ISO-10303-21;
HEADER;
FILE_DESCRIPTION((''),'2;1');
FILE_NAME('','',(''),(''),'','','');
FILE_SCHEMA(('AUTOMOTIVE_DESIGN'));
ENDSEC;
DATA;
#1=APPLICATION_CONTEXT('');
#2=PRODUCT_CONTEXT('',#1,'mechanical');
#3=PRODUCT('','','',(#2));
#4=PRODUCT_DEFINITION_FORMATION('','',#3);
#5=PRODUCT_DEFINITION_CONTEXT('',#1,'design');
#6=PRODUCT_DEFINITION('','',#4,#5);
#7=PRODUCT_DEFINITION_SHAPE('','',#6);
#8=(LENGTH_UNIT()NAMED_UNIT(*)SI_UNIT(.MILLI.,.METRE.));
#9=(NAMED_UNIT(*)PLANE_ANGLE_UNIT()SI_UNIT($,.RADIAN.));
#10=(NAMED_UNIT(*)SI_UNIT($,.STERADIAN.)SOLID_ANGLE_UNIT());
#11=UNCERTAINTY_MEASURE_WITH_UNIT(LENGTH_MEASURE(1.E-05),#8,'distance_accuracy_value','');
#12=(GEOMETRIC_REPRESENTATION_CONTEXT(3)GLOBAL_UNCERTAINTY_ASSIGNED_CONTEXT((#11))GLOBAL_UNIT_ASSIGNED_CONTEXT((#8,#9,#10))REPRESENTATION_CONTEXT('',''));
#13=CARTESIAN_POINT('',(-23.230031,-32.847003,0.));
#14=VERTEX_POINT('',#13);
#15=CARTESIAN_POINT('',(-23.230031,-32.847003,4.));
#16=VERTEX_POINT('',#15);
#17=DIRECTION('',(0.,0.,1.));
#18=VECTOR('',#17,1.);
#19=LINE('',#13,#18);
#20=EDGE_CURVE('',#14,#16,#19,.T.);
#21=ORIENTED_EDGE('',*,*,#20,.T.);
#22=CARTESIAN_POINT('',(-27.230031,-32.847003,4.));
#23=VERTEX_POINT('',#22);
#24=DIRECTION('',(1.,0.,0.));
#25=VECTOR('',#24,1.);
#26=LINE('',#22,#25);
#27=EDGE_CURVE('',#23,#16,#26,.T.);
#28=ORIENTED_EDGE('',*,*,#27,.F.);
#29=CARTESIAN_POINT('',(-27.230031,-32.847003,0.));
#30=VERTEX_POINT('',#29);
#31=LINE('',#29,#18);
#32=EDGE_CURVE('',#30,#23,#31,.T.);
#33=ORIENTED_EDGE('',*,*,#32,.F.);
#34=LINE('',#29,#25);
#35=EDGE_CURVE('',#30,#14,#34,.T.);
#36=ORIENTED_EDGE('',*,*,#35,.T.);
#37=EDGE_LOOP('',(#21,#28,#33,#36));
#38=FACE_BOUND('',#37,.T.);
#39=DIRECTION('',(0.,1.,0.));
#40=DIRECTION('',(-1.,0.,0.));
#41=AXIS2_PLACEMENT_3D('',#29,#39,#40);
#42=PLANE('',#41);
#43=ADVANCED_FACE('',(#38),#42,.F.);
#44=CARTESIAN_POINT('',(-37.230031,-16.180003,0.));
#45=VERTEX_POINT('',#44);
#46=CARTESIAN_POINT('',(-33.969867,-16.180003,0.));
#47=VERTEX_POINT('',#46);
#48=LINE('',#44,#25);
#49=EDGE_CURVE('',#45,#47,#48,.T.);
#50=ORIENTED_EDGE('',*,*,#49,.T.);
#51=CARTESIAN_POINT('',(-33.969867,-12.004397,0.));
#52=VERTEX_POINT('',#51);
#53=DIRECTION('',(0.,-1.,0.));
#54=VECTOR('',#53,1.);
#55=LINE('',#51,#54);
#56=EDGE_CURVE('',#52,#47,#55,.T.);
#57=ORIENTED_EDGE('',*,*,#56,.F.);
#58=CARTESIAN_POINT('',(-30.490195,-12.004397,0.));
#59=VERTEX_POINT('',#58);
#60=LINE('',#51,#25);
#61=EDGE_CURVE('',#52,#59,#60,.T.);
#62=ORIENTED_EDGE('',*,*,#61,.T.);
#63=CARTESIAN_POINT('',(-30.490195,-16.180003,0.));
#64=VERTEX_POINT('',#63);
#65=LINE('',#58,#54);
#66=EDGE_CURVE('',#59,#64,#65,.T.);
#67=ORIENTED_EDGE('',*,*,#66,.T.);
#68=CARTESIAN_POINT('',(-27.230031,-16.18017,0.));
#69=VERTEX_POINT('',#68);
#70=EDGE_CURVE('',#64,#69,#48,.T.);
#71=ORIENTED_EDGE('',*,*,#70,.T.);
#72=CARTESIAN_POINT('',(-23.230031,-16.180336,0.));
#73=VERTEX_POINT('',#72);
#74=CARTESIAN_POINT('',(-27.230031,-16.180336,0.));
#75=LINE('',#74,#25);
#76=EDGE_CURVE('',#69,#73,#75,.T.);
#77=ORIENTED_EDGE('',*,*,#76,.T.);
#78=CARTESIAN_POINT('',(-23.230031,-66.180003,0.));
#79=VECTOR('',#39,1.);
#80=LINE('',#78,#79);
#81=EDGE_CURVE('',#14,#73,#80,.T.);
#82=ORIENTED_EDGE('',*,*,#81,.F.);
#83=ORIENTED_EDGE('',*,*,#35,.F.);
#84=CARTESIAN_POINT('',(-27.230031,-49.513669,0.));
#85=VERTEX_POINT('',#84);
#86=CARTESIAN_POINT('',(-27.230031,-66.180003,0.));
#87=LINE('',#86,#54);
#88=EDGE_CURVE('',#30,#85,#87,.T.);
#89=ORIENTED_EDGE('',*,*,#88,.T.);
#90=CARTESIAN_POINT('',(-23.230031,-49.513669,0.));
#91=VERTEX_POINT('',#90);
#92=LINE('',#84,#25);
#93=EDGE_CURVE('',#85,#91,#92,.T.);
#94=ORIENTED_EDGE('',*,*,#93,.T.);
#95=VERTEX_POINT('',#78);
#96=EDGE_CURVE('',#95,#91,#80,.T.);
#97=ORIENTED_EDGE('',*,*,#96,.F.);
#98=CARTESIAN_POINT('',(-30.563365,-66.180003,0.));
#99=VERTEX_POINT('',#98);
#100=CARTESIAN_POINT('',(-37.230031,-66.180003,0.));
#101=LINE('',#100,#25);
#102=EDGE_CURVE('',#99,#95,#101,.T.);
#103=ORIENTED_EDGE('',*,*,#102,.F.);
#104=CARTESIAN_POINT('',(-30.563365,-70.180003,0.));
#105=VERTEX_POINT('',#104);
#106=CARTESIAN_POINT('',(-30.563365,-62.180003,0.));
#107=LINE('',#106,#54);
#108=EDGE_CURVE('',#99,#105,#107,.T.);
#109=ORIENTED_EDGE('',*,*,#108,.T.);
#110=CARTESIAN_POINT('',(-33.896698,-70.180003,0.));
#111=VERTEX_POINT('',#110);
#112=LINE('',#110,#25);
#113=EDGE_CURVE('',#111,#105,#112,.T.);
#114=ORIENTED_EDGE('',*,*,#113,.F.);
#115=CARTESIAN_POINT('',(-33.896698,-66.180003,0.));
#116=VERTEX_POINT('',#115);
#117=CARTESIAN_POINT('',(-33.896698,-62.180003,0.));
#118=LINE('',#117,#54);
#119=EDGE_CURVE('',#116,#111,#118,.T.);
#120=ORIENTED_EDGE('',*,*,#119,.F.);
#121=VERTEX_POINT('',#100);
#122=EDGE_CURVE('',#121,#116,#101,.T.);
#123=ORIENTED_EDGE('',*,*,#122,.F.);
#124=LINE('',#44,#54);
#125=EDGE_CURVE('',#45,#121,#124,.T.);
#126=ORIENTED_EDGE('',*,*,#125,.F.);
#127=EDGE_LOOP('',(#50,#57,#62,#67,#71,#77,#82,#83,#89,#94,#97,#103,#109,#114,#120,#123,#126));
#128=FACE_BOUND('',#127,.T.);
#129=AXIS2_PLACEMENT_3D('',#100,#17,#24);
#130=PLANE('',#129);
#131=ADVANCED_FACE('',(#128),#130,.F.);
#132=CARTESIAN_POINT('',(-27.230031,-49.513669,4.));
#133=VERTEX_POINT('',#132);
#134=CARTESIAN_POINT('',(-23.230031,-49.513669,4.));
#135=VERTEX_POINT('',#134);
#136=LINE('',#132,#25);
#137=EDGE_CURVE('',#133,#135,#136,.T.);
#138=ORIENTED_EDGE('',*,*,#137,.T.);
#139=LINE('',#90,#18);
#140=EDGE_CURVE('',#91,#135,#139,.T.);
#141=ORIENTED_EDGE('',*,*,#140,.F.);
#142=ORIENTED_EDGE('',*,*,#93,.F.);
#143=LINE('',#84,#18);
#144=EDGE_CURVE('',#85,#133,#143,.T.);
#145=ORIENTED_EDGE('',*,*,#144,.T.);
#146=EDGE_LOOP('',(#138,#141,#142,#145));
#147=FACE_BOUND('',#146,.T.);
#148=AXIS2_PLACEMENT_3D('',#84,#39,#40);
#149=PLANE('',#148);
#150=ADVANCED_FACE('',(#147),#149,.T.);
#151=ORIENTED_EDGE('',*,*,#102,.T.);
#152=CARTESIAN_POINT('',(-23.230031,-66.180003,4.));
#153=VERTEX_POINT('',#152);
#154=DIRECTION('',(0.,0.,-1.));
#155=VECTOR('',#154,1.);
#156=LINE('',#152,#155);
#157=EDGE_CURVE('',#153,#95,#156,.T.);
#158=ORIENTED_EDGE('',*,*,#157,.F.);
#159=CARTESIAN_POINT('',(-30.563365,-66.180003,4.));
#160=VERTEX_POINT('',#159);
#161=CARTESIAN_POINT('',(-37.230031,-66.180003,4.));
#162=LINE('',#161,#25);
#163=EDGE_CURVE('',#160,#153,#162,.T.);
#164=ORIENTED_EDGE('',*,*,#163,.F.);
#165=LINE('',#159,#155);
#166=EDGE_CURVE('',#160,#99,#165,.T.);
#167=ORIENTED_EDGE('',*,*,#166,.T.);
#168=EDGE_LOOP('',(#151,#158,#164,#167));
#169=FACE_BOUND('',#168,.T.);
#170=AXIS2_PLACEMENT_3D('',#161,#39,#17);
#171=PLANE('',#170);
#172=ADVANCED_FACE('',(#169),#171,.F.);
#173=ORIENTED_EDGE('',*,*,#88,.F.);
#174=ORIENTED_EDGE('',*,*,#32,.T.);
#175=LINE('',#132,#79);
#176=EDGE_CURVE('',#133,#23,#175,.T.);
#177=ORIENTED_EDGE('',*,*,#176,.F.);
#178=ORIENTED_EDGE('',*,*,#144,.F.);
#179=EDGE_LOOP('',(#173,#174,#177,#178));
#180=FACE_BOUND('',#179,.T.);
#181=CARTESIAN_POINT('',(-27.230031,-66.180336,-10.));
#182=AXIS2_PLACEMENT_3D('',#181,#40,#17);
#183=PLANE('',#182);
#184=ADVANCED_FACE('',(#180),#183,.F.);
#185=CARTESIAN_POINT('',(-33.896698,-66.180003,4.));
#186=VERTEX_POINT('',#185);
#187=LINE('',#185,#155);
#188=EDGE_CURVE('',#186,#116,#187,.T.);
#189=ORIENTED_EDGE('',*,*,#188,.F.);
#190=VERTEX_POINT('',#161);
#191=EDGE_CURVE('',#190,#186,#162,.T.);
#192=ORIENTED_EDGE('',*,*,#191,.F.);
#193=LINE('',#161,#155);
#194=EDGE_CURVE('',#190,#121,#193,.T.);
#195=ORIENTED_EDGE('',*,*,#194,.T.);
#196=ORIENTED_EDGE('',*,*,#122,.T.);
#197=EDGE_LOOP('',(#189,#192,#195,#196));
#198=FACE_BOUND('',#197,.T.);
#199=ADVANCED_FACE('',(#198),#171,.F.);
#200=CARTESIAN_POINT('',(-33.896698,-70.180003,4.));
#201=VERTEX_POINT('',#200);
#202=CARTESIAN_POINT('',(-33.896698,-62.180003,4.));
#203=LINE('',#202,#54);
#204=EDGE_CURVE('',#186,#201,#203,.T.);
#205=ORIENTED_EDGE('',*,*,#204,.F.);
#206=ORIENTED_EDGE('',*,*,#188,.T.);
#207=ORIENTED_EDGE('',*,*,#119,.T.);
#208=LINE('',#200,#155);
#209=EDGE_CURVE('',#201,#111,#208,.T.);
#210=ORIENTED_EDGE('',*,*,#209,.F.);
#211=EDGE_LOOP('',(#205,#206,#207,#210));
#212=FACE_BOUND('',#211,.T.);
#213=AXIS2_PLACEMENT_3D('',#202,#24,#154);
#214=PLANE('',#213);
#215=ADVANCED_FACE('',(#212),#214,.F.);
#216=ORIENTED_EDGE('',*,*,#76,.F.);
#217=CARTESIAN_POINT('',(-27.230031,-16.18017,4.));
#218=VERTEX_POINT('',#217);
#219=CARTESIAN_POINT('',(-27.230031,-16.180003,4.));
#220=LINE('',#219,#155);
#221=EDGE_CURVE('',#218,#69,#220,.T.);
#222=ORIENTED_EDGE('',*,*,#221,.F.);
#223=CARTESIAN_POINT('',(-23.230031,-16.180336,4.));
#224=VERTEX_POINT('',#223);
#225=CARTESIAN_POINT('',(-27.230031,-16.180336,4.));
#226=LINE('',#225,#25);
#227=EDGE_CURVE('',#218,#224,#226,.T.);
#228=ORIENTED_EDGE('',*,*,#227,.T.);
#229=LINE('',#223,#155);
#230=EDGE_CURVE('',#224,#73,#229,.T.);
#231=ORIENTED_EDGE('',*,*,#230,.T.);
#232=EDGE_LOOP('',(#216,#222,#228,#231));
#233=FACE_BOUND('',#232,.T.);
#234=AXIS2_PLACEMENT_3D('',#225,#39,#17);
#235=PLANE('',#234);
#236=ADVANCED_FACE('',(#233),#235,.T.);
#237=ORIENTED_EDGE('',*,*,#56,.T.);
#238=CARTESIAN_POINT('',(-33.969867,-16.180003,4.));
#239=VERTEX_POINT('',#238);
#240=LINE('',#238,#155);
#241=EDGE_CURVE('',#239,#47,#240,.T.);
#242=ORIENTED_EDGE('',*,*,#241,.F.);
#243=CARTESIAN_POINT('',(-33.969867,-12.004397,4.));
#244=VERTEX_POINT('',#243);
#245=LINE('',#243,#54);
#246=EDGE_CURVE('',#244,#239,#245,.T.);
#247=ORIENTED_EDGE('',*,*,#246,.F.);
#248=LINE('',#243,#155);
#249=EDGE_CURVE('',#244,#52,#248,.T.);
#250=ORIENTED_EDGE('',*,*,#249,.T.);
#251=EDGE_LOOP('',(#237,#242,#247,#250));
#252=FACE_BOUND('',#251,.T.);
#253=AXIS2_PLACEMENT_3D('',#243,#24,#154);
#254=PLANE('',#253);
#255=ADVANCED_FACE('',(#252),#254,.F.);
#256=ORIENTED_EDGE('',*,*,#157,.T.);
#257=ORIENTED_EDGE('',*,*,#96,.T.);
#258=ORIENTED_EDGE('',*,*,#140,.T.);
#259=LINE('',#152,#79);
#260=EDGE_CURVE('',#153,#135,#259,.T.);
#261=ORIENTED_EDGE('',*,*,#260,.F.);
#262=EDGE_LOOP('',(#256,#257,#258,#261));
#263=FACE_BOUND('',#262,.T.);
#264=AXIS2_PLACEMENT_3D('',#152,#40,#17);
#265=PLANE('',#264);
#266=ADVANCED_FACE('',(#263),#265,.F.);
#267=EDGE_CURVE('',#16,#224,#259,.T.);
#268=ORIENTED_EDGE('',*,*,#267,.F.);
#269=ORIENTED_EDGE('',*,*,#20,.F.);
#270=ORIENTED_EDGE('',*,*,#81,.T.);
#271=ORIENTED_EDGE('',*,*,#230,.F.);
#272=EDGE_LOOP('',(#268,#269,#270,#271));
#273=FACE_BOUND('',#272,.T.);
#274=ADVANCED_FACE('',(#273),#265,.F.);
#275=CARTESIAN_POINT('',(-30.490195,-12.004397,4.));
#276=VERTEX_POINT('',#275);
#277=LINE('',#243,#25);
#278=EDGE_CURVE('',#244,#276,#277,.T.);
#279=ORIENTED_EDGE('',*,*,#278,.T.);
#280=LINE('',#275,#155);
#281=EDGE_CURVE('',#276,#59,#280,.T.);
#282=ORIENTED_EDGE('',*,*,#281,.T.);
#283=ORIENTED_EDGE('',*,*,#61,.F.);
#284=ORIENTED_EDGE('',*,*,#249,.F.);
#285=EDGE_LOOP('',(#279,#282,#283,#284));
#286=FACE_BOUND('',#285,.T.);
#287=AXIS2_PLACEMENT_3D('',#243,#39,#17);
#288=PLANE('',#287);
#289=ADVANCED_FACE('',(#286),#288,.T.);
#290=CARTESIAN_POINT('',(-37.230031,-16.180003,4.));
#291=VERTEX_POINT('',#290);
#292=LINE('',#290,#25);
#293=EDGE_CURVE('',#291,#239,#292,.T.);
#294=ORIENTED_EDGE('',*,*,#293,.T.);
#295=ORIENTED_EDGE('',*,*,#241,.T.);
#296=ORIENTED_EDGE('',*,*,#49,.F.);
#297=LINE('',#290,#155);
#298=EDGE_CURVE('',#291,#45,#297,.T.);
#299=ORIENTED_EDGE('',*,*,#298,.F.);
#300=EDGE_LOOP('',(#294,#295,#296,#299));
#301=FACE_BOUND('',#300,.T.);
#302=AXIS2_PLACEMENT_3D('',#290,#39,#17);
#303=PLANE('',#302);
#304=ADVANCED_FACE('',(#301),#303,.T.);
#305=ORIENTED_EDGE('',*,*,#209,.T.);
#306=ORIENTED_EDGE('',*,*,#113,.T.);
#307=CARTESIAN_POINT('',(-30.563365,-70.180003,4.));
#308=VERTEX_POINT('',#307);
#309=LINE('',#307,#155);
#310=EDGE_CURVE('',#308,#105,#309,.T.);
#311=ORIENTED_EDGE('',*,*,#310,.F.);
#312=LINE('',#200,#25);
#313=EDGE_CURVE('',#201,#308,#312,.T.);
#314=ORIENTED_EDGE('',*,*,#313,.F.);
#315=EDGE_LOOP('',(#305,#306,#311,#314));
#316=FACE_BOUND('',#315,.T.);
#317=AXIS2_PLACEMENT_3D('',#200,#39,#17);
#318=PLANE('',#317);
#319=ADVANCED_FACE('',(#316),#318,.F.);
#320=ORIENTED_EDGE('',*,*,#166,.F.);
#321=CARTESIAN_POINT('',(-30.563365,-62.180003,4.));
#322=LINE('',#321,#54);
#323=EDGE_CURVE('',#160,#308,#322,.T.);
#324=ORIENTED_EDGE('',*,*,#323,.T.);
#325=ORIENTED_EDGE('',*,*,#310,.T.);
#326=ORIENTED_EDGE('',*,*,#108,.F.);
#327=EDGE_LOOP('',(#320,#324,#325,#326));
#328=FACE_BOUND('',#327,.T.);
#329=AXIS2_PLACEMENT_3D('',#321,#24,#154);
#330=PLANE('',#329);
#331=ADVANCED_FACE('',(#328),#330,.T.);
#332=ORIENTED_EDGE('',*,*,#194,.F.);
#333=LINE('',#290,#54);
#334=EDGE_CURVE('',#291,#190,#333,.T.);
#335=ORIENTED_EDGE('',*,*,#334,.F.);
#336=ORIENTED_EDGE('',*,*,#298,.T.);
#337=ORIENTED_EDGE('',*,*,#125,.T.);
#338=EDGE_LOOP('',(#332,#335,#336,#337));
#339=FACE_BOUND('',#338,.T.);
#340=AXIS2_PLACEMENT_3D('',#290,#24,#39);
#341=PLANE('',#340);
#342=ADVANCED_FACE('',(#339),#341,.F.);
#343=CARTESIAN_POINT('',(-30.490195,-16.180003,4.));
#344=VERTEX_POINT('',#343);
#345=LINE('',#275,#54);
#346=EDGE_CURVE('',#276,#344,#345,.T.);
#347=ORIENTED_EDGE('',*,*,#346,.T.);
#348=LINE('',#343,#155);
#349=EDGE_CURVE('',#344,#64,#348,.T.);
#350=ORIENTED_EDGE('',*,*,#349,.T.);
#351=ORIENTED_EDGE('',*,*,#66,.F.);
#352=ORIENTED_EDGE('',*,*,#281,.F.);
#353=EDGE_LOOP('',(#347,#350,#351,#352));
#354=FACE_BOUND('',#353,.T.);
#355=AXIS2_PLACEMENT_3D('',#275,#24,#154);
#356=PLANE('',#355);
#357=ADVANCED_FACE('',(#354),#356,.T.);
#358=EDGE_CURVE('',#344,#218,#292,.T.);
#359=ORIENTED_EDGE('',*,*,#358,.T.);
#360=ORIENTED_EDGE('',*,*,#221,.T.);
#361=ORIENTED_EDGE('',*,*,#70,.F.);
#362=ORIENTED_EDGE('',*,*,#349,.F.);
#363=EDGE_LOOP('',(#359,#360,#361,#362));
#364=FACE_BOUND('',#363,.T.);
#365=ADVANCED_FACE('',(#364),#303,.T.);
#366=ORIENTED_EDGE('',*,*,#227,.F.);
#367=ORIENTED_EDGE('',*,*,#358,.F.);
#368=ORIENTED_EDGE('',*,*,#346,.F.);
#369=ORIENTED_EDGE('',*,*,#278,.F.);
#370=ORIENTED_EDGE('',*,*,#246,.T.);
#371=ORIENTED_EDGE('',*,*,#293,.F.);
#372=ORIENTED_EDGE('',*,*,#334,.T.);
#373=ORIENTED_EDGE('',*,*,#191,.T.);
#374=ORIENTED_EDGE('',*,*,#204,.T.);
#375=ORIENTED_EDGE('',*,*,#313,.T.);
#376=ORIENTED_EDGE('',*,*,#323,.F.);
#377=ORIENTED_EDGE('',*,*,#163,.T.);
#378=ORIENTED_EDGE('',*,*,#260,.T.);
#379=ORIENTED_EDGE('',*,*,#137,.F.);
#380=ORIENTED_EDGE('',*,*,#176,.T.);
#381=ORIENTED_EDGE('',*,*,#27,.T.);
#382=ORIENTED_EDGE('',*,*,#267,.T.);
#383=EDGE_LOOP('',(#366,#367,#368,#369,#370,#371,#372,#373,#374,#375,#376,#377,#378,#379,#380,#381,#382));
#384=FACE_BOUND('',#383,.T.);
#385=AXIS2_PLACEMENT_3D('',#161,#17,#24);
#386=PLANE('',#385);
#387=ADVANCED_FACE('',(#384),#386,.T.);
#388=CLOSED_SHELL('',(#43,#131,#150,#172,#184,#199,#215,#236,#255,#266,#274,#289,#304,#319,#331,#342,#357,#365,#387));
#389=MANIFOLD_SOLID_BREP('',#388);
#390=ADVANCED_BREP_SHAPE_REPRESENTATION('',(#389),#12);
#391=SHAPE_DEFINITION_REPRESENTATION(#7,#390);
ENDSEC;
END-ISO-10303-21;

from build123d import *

# Parameters (mm, degrees)
SKETCH1_W           = 3.479672363
SKETCH1_H           = 4.175606835
SKETCH1_W_2         = 3.333333333
SKETCH1_H_2         = 4
BOSS_EXTRUDE1_DEPTH = 4
CAVITY1_START       = -27.230031218
CAVITY1_OUTLINE_W   = 16.666666667
CAVITY1_OUTLINE_H   = 4
CAVITY1_DEPTH       = 4


# Read off the part's stored shape, not the designer's step: Cavity1
with BuildPart() as part:
    # Sketch1 → Boss-Extrude1 (new body)
    with BuildSketch(Plane.XY):
        with Locations((-32.230031219, -14.092199994)):
            Rectangle(SKETCH1_W, SKETCH1_H)
        Polygon((-33.9698674, -20.355610246), (-33.9698674, -16.180003411), (-37.230031218, -16.180003411), (-37.230031218, -66.180003411), (-33.896697885, -66.180003411), (-33.896697885, -62.180003411), (-30.563364552, -62.180003411), (-30.563364552, -66.180003411), (-27.230031218, -66.180003411), (-27.230031218, -16.180003411), (-30.490195037, -16.180003411), (-30.490195037, -20.355610246), align=None)
        with Locations((-32.230031219, -18.267806828)):
            Rectangle(SKETCH1_W, SKETCH1_H)
        Polygon((-23.230031218, -16.180335931), (-27.230031218, -16.180003411), (-27.230031218, -66.180003411), (-23.230031218, -66.180003411), align=None)
        with Locations((-32.230031219, -64.180003411)):
            Rectangle(SKETCH1_W_2, SKETCH1_H_2)
        with Locations((-32.230031219, -68.180003411)):
            Rectangle(SKETCH1_W_2, SKETCH1_H_2)
    extrude(amount=BOSS_EXTRUDE1_DEPTH)

    # Cavity1 outline → Cavity1 (cut)
    with BuildSketch(Plane.YZ.offset(CAVITY1_START)):
        with Locations((-41.180335932, 2)):
            Rectangle(CAVITY1_OUTLINE_W, CAVITY1_OUTLINE_H)
    extrude(amount=CAVITY1_DEPTH, mode=Mode.SUBTRACT)


solid = part.part
